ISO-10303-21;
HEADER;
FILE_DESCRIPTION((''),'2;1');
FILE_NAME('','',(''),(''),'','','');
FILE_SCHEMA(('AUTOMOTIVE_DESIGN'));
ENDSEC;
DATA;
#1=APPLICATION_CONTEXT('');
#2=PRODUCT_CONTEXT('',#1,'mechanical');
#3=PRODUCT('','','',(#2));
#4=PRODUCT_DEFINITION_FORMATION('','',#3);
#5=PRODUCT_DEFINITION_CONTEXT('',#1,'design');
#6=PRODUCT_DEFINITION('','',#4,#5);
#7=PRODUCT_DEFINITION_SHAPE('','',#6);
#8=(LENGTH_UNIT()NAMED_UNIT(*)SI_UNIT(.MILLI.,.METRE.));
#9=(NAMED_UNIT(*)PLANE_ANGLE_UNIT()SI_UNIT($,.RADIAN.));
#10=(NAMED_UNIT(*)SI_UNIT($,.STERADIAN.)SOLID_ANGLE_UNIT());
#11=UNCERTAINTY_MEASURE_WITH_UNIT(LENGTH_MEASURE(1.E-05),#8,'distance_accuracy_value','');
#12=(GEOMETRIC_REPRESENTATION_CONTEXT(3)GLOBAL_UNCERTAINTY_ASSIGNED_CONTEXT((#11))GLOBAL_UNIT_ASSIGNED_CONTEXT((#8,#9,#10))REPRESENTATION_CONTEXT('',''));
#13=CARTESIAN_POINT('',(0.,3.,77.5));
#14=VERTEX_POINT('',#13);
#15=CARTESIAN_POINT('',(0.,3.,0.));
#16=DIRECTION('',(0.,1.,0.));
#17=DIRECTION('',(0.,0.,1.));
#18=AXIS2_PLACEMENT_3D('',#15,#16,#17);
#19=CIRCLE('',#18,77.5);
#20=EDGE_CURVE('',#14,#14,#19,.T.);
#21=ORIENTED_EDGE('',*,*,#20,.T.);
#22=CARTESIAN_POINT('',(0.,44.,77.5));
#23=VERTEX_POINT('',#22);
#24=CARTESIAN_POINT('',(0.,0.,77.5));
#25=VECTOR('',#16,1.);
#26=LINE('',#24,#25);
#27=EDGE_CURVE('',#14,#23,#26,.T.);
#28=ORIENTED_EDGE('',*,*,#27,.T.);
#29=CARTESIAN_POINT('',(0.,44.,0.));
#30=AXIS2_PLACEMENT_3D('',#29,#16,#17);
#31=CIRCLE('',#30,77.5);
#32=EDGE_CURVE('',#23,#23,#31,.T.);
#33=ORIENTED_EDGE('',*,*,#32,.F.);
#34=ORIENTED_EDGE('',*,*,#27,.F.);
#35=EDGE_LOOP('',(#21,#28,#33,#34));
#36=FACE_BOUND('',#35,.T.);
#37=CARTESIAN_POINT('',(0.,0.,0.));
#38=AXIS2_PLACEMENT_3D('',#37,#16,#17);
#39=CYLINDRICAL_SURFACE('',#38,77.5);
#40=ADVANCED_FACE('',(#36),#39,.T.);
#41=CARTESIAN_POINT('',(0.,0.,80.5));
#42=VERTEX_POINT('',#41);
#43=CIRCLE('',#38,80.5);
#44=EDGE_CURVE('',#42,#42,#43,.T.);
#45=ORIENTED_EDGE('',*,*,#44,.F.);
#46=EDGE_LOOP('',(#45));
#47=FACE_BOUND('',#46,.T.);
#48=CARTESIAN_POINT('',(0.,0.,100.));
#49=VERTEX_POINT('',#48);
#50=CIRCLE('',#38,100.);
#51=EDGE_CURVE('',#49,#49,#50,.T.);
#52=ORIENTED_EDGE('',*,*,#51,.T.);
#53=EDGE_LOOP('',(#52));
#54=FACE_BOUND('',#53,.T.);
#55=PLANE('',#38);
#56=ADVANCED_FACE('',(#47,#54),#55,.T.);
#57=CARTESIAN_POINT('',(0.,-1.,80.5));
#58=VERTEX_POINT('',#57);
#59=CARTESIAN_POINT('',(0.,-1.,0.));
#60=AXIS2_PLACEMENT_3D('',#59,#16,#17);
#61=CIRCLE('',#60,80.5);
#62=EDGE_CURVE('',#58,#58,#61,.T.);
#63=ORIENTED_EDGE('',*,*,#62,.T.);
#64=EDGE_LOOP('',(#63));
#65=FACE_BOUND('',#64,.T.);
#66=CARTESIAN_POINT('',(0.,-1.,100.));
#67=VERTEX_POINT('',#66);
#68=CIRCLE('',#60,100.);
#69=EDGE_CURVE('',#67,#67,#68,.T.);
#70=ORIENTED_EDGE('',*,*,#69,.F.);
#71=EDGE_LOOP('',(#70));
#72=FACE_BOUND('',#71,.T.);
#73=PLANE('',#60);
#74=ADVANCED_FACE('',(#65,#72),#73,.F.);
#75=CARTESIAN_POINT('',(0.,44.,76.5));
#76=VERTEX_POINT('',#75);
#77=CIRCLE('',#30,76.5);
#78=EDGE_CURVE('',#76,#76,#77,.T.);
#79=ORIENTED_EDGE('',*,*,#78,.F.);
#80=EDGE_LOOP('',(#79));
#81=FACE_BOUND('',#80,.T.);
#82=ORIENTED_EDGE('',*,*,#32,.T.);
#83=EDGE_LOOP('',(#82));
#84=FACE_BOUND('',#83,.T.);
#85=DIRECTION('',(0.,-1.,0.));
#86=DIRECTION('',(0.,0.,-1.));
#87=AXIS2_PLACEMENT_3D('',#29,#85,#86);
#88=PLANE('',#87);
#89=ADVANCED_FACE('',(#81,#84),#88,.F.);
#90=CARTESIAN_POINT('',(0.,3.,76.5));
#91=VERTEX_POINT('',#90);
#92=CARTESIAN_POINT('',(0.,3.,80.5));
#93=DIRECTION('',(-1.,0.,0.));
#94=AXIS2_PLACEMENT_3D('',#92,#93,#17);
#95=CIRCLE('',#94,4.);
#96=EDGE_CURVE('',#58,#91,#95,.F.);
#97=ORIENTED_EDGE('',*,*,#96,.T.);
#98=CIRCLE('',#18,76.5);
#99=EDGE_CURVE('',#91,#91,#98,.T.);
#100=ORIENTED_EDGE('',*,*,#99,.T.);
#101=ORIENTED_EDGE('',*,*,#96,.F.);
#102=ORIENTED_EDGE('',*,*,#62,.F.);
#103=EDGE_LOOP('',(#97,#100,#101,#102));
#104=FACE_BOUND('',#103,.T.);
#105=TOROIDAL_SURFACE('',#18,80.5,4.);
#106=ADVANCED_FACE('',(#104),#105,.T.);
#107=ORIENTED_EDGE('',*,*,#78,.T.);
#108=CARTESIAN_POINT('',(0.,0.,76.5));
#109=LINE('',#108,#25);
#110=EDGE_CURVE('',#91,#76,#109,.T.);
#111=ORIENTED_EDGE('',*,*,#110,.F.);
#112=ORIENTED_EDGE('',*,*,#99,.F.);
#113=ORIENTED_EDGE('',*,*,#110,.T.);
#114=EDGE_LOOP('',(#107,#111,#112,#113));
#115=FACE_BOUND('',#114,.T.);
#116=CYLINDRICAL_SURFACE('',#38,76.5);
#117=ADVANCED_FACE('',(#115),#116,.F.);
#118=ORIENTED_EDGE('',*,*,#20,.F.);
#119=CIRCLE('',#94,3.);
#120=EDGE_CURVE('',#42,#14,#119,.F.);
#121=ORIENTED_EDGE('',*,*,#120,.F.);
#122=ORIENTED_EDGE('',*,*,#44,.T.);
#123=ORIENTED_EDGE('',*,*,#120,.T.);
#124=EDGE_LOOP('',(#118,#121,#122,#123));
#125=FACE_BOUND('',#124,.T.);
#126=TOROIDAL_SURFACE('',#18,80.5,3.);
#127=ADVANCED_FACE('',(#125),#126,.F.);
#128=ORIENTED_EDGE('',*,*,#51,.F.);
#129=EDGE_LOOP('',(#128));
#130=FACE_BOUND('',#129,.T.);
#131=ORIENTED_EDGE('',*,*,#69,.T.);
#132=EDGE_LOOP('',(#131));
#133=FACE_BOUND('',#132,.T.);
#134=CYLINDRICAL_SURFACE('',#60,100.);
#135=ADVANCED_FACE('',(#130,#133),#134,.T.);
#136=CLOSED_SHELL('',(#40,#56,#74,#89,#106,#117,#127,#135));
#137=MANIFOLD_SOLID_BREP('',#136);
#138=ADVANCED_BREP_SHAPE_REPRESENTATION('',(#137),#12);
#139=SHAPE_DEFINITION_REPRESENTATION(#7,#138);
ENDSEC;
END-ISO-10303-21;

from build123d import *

# Parameters (mm, degrees)
SKETCH15_R         = 100
SKETCH15_R_2       = 81.5
BASE_FLANGE1_DEPTH = 1


# Read off the part's stored shape, not the designer's step: Edge-Flange1
# Sheet-metal steps are written as plain solids
with BuildPart() as part:
    # Sketch15 → Base-Flange1 (new body)
    with BuildSketch(Plane(origin=(0, 0, 0), x_dir=(1, 0, 0), z_dir=(0, 1, 0))):
        with Locations(Location((0, 0, 0), (0, 0, 270))):
            Circle(SKETCH15_R)
        with Locations(Location((0, 0, 0), (0, 0, 270))):
            Circle(SKETCH15_R_2, mode=Mode.SUBTRACT)
    extrude(amount=-BASE_FLANGE1_DEPTH)

    # Edge-Flange1 outline → Edge-Flange1 (revolve)
    with BuildSketch(Plane.XY):
        with BuildLine():
            Line((80.5, -1), (81.5, -1))
            Line((81.5, -1), (81.5, 0))
            Line((81.5, 0), (80.5, 0))
            ThreePointArc((80.5, 0), (78.378679656, 0.878679656), (77.5, 3))
            Line((77.5, 3), (77.5, 44))
            Line((77.5, 44), (76.5, 44))
            Line((76.5, 44), (76.5, 3))
            ThreePointArc((76.5, 3), (77.671572875, 0.171572875), (80.5, -1))
        make_face()
    revolve(axis=Axis((0, 0, 0), (0, 1, 0)))


solid = part.part
